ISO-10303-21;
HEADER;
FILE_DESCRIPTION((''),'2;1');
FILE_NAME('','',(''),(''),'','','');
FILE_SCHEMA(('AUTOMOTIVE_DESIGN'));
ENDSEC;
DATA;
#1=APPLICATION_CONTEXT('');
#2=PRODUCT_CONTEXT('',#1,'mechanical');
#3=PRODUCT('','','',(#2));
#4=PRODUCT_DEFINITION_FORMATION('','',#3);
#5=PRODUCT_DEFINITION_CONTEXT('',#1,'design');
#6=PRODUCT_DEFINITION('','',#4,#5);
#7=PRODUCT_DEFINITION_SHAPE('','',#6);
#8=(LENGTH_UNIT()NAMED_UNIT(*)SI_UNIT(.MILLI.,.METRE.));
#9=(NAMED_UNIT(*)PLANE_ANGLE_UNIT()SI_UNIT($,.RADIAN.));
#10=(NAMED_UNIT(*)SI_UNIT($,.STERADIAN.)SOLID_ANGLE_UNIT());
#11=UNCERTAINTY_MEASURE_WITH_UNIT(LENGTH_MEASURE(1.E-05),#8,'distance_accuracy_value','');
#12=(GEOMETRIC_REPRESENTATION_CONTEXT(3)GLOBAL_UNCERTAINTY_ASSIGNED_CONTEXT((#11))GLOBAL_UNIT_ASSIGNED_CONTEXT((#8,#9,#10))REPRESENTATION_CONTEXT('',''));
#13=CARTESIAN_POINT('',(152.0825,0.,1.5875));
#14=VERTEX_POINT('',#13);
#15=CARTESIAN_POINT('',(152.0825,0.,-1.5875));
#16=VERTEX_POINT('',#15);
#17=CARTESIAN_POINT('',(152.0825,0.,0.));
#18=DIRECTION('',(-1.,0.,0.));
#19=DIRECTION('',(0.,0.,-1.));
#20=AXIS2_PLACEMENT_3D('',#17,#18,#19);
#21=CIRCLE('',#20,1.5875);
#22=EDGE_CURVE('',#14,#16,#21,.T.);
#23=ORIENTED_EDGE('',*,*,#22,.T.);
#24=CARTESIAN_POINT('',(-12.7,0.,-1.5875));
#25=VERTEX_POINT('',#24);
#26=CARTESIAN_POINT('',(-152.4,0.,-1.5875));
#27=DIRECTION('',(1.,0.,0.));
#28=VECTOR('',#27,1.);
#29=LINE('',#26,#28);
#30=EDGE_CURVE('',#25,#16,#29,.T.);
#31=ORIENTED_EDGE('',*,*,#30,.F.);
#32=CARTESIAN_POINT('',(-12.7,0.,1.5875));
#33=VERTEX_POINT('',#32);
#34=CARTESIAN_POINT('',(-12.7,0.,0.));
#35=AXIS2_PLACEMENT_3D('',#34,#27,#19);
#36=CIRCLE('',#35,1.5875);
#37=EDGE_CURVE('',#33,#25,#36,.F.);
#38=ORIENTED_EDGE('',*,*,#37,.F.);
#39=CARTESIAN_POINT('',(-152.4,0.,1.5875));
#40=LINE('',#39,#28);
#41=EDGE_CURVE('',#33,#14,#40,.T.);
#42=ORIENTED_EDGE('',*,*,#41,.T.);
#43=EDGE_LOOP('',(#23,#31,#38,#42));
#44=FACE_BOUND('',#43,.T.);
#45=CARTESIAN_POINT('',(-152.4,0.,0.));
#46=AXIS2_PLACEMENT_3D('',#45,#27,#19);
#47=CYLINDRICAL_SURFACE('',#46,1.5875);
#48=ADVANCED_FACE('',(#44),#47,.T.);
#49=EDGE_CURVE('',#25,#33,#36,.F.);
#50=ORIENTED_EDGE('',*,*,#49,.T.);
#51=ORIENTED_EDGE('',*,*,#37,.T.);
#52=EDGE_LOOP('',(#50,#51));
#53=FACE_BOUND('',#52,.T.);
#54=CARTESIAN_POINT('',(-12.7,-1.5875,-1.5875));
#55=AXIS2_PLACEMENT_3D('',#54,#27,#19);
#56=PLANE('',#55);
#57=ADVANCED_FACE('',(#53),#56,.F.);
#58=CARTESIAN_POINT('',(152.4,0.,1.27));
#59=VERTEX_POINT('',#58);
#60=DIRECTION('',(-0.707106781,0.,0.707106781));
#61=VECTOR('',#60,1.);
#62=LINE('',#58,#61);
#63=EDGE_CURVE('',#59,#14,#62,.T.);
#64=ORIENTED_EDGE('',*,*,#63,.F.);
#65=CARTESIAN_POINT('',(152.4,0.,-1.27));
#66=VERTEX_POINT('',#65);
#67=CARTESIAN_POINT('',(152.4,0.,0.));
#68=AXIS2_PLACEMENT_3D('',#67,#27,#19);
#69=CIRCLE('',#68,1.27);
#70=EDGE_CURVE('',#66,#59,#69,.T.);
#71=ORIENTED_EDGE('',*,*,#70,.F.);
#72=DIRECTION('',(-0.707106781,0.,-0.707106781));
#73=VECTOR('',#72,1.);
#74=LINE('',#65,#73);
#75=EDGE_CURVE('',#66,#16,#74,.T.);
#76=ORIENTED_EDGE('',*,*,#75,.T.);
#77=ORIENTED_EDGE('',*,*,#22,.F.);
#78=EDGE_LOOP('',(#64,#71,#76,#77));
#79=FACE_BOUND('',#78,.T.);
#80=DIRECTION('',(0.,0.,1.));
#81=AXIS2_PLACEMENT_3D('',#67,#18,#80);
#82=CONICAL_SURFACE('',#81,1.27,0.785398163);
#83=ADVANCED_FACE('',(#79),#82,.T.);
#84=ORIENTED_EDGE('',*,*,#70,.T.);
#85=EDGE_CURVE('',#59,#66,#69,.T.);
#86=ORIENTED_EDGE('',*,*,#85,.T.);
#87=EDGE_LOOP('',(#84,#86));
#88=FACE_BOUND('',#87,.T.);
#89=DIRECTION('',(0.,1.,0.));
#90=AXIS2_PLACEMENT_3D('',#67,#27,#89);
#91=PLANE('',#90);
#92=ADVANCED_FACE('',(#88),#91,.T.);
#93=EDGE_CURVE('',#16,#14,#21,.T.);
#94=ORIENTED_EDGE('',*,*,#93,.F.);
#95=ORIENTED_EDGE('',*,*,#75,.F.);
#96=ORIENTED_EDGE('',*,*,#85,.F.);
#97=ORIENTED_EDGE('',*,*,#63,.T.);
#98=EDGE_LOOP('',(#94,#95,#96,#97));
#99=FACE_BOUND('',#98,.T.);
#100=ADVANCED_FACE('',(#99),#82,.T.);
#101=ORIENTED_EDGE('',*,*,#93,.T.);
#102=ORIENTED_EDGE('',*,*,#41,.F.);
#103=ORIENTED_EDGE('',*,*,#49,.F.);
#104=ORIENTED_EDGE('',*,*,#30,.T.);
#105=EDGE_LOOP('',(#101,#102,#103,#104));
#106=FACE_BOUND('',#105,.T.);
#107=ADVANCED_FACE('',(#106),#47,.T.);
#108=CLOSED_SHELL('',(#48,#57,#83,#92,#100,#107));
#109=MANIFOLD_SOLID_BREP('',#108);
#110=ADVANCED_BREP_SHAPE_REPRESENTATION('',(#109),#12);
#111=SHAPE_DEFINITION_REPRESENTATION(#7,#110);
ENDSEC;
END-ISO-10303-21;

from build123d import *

# Parameters (mm, degrees)
CUT_EXTRUDE1_DEPTH      = 153.416535561
CUT_EXTRUDE1_DEPTH_BACK = 153.416535561
SKETCH1_W               = 139.7
SKETCH1_H               = 3.175


# Read off the part's stored shape, not the designer's step: Stock-CR25-101-17-1
with BuildPart() as part:
    # Stock-CR25-101-17-1 outline → Stock-CR25-101-17-1 (revolve)
    with BuildSketch(Plane.YX):
        Polygon((1.5875, 152.0825), (1.27, 152.4), (0, 152.4), (0, -152.4), (1.27, -152.4), (1.5875, -152.0825), align=None)
    revolve(axis=Axis((0, 0, 0), (1, 0, 0)))

    # Sketch1 → Cut-Extrude1 (cut, two sides: drawn at the far end of the back side and taken through both)
    with BuildSketch(Plane.XY.offset(-CUT_EXTRUDE1_DEPTH_BACK)):
        with Locations((-82.55, 0)):
            Rectangle(SKETCH1_W, SKETCH1_H)
    extrude(amount=CUT_EXTRUDE1_DEPTH + CUT_EXTRUDE1_DEPTH_BACK, mode=Mode.SUBTRACT)


solid = part.part
